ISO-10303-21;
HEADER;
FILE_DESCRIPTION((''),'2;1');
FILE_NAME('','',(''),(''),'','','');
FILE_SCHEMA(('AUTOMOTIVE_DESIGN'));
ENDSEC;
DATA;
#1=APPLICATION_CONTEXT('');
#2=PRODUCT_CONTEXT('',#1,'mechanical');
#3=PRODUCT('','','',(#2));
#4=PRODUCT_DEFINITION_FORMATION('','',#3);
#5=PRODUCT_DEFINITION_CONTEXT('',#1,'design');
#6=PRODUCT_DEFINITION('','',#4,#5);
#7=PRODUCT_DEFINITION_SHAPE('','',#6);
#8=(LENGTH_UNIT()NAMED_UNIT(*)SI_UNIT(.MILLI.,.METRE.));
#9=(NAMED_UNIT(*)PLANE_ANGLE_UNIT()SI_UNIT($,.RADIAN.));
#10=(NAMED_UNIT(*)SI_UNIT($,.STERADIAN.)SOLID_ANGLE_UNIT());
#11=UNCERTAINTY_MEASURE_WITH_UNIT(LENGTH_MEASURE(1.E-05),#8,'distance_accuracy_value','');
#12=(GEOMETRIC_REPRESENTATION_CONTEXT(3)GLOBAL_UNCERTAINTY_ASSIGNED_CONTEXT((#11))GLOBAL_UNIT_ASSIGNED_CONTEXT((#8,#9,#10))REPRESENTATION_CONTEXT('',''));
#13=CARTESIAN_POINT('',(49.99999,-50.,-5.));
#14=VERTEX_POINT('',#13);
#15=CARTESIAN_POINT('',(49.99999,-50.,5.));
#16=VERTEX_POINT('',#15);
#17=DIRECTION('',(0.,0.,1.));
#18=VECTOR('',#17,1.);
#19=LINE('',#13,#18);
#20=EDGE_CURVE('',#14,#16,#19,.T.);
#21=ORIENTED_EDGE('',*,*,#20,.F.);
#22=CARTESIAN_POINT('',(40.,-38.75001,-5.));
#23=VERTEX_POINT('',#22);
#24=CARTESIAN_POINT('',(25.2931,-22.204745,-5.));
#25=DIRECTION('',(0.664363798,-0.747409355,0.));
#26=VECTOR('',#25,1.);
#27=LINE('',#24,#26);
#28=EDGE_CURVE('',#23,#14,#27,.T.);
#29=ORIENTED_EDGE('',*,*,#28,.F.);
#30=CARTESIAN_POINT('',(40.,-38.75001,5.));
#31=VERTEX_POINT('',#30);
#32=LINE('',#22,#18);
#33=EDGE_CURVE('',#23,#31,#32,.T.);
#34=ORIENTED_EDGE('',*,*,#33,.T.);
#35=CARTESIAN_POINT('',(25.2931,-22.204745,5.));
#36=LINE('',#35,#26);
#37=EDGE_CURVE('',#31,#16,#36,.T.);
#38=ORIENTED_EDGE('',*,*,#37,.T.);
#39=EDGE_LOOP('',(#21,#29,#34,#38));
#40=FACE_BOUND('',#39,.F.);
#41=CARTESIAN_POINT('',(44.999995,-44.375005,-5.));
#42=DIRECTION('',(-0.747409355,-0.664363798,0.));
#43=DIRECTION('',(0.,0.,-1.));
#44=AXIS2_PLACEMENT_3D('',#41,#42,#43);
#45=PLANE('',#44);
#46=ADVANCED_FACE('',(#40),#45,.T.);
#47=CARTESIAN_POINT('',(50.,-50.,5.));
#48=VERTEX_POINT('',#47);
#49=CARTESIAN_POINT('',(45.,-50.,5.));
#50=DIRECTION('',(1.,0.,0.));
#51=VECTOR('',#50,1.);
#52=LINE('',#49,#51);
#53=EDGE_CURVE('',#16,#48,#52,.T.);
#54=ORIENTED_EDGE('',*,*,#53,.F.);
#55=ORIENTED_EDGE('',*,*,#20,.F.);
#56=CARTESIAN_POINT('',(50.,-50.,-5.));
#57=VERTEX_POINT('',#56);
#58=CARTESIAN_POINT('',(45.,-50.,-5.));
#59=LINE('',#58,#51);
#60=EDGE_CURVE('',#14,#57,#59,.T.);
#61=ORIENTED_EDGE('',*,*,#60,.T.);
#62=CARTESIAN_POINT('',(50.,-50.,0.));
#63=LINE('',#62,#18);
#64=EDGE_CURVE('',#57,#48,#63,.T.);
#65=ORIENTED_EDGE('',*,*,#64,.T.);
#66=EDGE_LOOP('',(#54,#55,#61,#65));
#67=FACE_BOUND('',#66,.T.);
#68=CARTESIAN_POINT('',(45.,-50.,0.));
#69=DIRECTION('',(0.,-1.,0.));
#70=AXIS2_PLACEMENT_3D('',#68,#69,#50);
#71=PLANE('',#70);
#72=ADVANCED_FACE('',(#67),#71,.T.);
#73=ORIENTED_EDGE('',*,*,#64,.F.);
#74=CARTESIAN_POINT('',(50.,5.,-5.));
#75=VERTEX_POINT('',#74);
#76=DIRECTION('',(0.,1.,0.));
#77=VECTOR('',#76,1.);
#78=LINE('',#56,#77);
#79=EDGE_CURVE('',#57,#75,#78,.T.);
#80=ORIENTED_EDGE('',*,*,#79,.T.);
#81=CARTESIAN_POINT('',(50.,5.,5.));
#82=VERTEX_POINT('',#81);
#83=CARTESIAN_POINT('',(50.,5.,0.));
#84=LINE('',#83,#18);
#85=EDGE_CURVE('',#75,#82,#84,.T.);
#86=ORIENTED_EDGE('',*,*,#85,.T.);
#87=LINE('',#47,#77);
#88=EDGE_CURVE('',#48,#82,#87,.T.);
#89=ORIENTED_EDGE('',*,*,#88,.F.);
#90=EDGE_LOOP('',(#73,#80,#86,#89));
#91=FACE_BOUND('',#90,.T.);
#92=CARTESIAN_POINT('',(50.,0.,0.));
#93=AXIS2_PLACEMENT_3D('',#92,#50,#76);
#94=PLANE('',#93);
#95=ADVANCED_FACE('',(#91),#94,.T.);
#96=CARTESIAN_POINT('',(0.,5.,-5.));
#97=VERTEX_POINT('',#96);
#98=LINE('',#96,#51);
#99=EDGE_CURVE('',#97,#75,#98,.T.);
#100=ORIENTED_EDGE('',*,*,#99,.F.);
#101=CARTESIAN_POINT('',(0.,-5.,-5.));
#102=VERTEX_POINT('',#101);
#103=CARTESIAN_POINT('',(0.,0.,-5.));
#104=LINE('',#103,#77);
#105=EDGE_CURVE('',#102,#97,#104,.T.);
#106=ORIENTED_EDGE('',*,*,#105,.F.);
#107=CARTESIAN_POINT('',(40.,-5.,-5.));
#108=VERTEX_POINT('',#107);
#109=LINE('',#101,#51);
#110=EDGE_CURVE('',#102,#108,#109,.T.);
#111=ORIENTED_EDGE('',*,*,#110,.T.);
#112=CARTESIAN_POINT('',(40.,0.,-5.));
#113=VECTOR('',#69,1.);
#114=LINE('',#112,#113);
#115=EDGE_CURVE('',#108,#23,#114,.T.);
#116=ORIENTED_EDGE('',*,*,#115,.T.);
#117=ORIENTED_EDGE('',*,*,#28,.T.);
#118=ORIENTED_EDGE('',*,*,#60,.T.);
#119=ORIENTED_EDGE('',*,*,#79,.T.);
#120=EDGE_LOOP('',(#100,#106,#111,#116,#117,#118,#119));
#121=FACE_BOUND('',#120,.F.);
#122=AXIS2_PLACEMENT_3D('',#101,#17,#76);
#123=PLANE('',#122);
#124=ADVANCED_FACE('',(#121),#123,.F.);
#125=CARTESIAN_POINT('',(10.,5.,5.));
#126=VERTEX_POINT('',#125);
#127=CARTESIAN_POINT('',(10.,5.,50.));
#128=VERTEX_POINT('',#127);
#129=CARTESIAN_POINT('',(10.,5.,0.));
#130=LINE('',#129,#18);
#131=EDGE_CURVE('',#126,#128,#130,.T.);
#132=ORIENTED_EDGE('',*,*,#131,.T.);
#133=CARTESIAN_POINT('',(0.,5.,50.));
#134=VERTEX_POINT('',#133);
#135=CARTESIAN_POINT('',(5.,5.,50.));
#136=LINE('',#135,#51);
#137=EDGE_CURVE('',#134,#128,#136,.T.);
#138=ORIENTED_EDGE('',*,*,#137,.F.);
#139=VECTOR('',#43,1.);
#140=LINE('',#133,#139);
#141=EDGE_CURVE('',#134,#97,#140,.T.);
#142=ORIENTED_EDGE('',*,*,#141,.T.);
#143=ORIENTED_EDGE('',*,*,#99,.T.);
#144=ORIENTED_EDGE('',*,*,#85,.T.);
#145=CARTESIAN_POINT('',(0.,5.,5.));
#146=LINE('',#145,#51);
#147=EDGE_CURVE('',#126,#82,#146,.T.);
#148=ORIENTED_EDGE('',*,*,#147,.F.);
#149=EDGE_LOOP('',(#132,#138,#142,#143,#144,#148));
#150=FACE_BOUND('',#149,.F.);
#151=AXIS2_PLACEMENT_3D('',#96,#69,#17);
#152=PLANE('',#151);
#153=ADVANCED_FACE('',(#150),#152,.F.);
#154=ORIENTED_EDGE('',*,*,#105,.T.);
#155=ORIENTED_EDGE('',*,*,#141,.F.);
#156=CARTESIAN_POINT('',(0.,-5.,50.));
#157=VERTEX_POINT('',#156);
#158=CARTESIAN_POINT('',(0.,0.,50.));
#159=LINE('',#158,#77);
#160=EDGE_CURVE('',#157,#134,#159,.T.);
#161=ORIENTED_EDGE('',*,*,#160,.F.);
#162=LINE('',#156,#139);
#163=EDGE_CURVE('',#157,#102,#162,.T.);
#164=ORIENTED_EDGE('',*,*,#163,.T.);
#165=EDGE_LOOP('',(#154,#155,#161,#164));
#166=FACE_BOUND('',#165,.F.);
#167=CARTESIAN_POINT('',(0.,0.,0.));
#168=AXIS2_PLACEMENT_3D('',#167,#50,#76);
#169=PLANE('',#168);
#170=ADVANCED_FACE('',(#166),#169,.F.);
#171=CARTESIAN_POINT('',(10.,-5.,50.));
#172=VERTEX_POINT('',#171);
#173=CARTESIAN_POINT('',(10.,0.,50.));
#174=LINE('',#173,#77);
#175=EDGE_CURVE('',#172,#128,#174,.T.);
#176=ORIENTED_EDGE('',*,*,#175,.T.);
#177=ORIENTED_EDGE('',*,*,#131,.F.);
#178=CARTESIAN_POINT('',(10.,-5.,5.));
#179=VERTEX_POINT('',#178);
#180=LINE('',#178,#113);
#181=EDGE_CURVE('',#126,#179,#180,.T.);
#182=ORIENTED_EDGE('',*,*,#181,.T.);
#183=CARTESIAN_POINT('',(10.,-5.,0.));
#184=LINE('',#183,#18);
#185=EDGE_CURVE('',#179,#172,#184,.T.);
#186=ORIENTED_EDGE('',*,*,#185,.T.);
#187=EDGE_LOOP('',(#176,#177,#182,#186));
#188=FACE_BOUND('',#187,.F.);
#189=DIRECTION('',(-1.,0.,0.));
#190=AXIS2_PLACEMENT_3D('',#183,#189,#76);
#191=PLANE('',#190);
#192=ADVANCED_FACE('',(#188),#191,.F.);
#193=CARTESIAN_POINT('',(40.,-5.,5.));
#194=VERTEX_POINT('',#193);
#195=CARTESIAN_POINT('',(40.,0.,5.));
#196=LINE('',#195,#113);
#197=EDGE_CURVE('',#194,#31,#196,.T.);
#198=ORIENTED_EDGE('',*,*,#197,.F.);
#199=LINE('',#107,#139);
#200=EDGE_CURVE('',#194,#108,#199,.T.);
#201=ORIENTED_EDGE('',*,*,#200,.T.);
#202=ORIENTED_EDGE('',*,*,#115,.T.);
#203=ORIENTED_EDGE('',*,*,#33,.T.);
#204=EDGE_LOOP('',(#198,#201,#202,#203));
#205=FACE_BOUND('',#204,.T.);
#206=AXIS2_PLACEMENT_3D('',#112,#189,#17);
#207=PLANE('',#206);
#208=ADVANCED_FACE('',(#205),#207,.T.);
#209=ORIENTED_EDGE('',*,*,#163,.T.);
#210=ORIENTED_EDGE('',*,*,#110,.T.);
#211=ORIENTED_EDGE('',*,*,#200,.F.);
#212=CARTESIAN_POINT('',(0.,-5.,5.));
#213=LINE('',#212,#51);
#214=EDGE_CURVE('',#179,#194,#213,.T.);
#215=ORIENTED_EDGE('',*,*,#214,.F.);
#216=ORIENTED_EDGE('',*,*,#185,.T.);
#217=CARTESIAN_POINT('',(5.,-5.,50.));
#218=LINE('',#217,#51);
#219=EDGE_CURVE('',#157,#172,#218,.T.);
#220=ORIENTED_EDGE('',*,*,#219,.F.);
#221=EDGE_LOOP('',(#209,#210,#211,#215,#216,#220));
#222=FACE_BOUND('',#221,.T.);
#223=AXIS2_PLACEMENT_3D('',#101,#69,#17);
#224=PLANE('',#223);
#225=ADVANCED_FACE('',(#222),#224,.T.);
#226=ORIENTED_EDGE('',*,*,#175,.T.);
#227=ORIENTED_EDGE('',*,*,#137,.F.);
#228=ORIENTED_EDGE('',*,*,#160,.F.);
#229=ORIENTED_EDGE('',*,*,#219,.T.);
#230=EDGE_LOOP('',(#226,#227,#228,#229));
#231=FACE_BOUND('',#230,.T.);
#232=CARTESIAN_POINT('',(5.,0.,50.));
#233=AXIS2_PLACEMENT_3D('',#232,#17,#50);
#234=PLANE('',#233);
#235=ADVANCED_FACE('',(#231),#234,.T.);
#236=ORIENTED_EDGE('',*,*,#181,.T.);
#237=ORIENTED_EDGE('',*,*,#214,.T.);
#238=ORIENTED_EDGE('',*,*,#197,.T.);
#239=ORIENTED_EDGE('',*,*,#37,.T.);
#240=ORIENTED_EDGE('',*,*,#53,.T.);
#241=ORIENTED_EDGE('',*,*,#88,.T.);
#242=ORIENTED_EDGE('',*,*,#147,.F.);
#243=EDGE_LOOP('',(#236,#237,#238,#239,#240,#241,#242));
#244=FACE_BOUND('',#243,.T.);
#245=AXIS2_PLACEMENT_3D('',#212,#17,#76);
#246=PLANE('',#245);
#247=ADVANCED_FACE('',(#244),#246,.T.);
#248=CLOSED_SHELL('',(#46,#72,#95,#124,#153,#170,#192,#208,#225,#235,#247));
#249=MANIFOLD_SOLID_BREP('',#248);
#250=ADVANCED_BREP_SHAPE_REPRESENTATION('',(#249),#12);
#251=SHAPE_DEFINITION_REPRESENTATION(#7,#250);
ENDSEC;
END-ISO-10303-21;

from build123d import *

# Parameters (mm, degrees)
F0_W     = 10
F0_H     = 10
F1_DEPTH = 50
F2_W     = 10
F2_H     = 10
F3_DEPTH = 50
F4_W     = 10
F4_H     = 10
F5_DEPTH = 50
F6_SIZE2 = 9.99999
F6_SIZE  = 11.24999


# Not quite as in the source:
# - a fillet or chamfer is up to 0.001 mm smaller than in the source, because OpenCascade refuses the exact size


with BuildPart() as f1:
    # F0 (on Right) → F1 (new body)
    with BuildSketch(Plane.YZ):
        Rectangle(F0_W, F0_H)
    extrude(amount=F1_DEPTH)

    # F2 (on Top) → F3 (join)
    with BuildSketch(Plane.XY):
        with Locations((5, 0)):
            Rectangle(F2_W, F2_H)
    extrude(amount=F3_DEPTH)

    # F4 (on Front) → F5 (join)
    with BuildSketch(Plane.XZ):
        with Locations((45, 0)):
            Rectangle(F4_W, F4_H)
    extrude(amount=F5_DEPTH)

    # F6 (size 11.25 and 10 in the source; OpenCascade refuses exactly that, so slightly less here)
    f6_edges = [f1.edges().sort_by_distance(p)[0] for p in [
        (40, -50, 0),
    ]]
    f6_side = f1.faces().sort_by_distance((40, -27.5, 0))[0]
    chamfer(f6_edges, length=F6_SIZE, length2=F6_SIZE2, reference=f6_side)


solid = f1.part
